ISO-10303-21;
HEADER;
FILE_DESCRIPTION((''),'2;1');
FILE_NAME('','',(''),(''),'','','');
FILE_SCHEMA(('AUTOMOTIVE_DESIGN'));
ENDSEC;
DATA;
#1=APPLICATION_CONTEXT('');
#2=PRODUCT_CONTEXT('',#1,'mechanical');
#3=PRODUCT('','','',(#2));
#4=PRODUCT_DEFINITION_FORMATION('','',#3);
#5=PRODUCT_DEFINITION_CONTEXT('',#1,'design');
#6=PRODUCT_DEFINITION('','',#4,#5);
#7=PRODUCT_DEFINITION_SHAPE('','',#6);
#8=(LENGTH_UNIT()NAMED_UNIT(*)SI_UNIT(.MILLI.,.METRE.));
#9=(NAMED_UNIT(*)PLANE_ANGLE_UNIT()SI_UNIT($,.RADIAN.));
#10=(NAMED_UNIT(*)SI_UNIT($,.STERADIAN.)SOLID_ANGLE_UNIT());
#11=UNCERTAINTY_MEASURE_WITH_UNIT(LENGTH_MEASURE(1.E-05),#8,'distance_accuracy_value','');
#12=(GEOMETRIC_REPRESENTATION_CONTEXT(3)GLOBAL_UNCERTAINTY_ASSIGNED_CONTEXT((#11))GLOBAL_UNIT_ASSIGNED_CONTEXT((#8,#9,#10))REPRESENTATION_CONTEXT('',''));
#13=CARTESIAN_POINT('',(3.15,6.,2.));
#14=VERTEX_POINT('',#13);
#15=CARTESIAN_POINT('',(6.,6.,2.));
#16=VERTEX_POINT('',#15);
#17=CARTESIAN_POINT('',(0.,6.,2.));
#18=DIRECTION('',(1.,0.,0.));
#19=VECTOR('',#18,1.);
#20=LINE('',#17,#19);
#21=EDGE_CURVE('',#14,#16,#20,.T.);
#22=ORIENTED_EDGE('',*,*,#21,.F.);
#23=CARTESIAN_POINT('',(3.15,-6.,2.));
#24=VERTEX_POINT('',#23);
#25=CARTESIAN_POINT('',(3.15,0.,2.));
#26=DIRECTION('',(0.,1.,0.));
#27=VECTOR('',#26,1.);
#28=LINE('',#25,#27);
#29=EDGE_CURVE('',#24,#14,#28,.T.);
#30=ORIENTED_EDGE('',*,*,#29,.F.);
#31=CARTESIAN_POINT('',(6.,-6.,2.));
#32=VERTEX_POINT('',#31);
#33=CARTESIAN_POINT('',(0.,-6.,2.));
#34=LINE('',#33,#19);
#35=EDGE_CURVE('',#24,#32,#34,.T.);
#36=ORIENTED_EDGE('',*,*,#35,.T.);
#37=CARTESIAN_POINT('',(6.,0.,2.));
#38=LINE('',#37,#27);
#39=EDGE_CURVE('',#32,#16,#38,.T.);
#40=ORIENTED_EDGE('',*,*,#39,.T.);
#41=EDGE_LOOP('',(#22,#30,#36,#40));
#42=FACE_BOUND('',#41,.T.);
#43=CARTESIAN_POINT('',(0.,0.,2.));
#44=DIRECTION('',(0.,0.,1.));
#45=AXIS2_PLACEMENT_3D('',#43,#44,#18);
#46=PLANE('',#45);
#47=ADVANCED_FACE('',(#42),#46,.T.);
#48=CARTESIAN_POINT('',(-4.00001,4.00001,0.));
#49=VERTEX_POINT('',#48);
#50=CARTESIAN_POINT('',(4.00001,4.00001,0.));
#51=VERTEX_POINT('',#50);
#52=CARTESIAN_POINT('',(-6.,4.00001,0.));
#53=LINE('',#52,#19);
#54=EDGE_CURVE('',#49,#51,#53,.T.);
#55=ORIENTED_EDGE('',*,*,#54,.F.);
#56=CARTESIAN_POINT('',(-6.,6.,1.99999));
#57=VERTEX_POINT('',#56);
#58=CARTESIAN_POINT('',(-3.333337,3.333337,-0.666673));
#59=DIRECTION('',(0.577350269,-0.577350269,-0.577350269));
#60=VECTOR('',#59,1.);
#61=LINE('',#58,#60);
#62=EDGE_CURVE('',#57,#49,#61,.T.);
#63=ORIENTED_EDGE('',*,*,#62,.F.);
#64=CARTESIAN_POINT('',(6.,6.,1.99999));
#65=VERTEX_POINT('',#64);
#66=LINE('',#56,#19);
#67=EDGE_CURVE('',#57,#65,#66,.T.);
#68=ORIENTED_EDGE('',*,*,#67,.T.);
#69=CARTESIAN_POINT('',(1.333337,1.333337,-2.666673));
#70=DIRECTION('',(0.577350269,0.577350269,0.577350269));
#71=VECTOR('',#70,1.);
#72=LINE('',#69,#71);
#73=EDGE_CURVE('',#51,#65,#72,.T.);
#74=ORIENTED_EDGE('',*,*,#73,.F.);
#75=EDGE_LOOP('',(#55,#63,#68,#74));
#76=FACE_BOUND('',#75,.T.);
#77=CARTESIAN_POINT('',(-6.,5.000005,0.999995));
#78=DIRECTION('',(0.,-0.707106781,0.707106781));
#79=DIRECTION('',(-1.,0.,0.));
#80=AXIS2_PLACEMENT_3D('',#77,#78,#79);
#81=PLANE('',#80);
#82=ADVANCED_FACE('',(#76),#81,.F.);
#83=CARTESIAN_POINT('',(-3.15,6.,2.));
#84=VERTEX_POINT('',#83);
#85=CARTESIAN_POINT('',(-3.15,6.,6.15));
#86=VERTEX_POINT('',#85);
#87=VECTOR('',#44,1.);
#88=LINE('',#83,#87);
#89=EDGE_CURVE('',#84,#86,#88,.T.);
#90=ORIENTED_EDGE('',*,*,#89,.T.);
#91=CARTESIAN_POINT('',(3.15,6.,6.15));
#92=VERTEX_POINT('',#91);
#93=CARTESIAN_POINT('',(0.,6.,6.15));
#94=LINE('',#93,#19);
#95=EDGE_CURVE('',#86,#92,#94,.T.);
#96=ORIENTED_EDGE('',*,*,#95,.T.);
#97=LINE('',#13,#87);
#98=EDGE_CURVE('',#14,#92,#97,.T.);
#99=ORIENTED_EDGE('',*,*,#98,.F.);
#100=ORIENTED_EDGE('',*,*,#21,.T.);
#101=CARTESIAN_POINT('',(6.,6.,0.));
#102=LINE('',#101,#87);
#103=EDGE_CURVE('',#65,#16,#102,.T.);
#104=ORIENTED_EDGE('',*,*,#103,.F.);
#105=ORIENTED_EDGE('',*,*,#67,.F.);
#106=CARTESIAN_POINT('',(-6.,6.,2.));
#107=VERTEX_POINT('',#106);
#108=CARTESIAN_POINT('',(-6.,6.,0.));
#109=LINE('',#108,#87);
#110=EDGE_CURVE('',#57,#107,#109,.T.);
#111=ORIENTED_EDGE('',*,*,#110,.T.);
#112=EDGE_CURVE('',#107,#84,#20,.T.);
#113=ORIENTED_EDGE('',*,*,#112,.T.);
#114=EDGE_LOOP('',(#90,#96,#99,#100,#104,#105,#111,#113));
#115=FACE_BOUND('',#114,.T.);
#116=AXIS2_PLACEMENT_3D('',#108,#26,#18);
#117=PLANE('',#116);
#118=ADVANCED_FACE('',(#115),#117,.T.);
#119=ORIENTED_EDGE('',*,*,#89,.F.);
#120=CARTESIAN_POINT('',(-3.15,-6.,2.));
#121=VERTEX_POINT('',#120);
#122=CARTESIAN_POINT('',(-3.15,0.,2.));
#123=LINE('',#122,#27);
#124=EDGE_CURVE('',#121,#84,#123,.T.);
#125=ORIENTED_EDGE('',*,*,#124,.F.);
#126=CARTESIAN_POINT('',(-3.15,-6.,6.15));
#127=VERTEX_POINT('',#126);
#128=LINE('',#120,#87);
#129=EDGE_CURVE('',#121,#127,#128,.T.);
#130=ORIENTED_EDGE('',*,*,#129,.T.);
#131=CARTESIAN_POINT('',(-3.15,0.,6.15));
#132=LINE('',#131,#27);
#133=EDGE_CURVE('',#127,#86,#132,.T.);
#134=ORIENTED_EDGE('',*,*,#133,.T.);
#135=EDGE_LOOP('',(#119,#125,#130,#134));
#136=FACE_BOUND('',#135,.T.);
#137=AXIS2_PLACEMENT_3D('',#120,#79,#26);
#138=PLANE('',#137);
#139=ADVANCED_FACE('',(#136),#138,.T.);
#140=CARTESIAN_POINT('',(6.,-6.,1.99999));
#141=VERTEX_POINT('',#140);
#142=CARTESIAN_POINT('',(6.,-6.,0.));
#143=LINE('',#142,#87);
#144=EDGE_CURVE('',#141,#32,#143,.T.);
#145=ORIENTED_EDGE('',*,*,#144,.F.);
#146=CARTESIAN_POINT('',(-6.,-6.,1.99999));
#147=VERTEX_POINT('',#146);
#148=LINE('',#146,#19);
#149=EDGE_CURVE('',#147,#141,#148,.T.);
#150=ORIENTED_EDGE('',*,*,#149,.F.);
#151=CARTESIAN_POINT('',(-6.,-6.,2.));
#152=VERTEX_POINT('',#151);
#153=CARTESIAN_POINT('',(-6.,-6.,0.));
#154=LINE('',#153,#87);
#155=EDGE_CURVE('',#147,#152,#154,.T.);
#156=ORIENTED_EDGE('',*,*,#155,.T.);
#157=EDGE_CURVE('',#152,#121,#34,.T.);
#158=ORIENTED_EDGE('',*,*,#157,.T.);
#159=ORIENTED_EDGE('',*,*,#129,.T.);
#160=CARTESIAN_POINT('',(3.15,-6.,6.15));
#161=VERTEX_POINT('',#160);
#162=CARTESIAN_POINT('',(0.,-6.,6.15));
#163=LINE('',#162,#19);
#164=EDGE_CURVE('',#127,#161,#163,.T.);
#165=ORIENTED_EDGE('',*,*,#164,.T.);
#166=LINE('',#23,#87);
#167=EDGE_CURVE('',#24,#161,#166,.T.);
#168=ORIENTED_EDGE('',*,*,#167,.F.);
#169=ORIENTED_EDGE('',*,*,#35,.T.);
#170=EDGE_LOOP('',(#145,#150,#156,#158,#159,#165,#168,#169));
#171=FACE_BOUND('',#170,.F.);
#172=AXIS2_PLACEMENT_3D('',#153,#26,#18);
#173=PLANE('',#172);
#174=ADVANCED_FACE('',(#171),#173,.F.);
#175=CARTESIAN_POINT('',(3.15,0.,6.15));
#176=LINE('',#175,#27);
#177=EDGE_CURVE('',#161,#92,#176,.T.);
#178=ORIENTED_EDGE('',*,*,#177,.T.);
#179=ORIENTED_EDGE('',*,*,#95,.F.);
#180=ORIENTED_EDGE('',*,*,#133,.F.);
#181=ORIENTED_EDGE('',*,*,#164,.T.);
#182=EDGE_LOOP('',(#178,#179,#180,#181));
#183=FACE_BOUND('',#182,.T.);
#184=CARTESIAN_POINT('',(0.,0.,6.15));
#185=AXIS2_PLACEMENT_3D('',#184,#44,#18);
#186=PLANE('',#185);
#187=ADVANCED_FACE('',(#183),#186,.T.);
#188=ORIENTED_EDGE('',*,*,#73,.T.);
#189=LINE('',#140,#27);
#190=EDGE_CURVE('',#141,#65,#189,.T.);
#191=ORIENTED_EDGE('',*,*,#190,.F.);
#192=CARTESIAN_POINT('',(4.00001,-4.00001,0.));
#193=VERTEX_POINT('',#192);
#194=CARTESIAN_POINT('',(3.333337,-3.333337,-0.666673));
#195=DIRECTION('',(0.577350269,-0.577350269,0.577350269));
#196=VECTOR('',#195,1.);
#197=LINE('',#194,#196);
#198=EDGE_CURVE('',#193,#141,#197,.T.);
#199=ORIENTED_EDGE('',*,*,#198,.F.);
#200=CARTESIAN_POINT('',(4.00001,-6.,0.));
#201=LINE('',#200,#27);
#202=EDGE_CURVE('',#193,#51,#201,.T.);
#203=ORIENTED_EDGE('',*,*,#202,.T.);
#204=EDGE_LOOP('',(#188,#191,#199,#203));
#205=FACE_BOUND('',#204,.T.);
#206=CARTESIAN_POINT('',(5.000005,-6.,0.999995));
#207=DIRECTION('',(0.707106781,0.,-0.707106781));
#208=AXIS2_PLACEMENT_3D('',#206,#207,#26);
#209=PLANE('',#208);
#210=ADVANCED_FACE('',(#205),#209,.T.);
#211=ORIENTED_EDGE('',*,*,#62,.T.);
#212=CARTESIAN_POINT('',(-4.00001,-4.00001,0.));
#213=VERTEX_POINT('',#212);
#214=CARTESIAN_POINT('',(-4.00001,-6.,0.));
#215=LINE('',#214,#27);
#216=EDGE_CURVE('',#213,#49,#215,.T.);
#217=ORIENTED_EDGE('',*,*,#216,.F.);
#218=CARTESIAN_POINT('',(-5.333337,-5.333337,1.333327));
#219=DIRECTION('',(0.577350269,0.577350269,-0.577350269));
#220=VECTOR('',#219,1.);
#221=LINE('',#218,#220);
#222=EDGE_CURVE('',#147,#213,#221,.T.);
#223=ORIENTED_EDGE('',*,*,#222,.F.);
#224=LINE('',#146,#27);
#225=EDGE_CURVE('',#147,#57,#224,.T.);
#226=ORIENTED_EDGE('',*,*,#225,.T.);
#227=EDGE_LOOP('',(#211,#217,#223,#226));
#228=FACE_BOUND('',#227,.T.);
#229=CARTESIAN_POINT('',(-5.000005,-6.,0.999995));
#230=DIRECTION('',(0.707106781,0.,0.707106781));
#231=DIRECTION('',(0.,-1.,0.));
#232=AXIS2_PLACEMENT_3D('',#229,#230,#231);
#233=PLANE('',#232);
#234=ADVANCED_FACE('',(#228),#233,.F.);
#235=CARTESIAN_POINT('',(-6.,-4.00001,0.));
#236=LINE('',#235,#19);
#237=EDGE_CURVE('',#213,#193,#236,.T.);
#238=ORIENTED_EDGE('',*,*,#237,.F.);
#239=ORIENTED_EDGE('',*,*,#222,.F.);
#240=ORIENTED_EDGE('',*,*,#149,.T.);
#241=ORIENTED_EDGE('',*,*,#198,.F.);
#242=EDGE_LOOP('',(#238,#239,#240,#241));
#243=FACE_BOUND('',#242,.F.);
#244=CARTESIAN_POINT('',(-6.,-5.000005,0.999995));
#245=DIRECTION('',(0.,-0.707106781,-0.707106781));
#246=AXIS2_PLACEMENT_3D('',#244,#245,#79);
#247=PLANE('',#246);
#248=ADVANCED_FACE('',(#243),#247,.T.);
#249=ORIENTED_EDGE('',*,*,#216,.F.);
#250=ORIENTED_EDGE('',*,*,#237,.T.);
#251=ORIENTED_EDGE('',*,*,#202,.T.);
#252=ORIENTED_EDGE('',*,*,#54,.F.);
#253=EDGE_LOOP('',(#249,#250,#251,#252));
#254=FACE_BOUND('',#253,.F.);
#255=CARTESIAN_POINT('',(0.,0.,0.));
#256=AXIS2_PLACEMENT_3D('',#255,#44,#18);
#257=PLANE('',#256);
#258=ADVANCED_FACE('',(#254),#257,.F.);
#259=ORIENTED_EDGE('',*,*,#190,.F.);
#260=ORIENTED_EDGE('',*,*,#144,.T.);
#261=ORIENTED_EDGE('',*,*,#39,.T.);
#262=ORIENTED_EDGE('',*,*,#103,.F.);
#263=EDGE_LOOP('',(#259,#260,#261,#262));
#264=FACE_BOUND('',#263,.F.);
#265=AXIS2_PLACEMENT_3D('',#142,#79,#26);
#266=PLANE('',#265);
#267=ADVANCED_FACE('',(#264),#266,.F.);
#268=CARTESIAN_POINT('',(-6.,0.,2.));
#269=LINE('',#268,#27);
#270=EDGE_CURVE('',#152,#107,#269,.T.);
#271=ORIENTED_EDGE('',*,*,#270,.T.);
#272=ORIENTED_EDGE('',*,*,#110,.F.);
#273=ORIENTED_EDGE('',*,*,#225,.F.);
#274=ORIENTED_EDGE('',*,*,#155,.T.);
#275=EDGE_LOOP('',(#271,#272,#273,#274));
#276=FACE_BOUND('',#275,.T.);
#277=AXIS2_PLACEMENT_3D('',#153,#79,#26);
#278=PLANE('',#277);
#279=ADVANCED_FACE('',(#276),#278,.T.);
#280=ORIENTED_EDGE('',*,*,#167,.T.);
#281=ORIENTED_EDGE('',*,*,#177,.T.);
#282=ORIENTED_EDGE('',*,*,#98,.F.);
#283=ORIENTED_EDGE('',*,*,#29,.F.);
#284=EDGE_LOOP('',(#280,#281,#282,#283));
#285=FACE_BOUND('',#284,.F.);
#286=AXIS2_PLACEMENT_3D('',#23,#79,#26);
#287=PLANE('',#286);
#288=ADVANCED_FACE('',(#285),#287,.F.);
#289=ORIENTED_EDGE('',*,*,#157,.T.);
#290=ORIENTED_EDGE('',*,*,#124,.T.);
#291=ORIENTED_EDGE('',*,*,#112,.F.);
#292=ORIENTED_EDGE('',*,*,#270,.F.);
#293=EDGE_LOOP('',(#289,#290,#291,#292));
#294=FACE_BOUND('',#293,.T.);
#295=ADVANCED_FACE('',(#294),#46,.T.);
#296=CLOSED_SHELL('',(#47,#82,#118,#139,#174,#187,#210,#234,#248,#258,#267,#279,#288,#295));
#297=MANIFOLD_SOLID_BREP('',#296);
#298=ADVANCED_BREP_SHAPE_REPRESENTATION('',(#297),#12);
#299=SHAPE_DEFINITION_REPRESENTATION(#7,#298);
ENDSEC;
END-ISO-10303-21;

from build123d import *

# Parameters (mm, degrees)
F0_W     = 12
F0_H     = 12
F1_DEPTH = 2
F2_W     = 6.3
F2_H     = 12
F3_DEPTH = 4.15
F4_SIZE  = 1.99999


# Not quite as in the source:
# - a fillet or chamfer is up to 0.001 mm smaller than in the source, because OpenCascade refuses the exact size


with BuildPart() as f1:
    # F0 (on Top) → F1 (new body)
    with BuildSketch(Plane.XY):
        Rectangle(F0_W, F0_H)
    extrude(amount=F1_DEPTH)

    # F2 (on face) → F3 (join)
    with BuildSketch(Plane.XY.offset(2)):
        Rectangle(F2_W, F2_H)
    extrude(amount=F3_DEPTH)

    # F4 (size 2 in the source; OpenCascade refuses exactly that, so slightly less here)
    f4_edges = [f1.edges().sort_by_distance(p)[0] for p in [
        (6, 0, 0),
        (0, -6, 0),
        (-6, 0, 0),
        (0, 6, 0),
    ]]
    chamfer(f4_edges, length=F4_SIZE)


solid = f1.part
